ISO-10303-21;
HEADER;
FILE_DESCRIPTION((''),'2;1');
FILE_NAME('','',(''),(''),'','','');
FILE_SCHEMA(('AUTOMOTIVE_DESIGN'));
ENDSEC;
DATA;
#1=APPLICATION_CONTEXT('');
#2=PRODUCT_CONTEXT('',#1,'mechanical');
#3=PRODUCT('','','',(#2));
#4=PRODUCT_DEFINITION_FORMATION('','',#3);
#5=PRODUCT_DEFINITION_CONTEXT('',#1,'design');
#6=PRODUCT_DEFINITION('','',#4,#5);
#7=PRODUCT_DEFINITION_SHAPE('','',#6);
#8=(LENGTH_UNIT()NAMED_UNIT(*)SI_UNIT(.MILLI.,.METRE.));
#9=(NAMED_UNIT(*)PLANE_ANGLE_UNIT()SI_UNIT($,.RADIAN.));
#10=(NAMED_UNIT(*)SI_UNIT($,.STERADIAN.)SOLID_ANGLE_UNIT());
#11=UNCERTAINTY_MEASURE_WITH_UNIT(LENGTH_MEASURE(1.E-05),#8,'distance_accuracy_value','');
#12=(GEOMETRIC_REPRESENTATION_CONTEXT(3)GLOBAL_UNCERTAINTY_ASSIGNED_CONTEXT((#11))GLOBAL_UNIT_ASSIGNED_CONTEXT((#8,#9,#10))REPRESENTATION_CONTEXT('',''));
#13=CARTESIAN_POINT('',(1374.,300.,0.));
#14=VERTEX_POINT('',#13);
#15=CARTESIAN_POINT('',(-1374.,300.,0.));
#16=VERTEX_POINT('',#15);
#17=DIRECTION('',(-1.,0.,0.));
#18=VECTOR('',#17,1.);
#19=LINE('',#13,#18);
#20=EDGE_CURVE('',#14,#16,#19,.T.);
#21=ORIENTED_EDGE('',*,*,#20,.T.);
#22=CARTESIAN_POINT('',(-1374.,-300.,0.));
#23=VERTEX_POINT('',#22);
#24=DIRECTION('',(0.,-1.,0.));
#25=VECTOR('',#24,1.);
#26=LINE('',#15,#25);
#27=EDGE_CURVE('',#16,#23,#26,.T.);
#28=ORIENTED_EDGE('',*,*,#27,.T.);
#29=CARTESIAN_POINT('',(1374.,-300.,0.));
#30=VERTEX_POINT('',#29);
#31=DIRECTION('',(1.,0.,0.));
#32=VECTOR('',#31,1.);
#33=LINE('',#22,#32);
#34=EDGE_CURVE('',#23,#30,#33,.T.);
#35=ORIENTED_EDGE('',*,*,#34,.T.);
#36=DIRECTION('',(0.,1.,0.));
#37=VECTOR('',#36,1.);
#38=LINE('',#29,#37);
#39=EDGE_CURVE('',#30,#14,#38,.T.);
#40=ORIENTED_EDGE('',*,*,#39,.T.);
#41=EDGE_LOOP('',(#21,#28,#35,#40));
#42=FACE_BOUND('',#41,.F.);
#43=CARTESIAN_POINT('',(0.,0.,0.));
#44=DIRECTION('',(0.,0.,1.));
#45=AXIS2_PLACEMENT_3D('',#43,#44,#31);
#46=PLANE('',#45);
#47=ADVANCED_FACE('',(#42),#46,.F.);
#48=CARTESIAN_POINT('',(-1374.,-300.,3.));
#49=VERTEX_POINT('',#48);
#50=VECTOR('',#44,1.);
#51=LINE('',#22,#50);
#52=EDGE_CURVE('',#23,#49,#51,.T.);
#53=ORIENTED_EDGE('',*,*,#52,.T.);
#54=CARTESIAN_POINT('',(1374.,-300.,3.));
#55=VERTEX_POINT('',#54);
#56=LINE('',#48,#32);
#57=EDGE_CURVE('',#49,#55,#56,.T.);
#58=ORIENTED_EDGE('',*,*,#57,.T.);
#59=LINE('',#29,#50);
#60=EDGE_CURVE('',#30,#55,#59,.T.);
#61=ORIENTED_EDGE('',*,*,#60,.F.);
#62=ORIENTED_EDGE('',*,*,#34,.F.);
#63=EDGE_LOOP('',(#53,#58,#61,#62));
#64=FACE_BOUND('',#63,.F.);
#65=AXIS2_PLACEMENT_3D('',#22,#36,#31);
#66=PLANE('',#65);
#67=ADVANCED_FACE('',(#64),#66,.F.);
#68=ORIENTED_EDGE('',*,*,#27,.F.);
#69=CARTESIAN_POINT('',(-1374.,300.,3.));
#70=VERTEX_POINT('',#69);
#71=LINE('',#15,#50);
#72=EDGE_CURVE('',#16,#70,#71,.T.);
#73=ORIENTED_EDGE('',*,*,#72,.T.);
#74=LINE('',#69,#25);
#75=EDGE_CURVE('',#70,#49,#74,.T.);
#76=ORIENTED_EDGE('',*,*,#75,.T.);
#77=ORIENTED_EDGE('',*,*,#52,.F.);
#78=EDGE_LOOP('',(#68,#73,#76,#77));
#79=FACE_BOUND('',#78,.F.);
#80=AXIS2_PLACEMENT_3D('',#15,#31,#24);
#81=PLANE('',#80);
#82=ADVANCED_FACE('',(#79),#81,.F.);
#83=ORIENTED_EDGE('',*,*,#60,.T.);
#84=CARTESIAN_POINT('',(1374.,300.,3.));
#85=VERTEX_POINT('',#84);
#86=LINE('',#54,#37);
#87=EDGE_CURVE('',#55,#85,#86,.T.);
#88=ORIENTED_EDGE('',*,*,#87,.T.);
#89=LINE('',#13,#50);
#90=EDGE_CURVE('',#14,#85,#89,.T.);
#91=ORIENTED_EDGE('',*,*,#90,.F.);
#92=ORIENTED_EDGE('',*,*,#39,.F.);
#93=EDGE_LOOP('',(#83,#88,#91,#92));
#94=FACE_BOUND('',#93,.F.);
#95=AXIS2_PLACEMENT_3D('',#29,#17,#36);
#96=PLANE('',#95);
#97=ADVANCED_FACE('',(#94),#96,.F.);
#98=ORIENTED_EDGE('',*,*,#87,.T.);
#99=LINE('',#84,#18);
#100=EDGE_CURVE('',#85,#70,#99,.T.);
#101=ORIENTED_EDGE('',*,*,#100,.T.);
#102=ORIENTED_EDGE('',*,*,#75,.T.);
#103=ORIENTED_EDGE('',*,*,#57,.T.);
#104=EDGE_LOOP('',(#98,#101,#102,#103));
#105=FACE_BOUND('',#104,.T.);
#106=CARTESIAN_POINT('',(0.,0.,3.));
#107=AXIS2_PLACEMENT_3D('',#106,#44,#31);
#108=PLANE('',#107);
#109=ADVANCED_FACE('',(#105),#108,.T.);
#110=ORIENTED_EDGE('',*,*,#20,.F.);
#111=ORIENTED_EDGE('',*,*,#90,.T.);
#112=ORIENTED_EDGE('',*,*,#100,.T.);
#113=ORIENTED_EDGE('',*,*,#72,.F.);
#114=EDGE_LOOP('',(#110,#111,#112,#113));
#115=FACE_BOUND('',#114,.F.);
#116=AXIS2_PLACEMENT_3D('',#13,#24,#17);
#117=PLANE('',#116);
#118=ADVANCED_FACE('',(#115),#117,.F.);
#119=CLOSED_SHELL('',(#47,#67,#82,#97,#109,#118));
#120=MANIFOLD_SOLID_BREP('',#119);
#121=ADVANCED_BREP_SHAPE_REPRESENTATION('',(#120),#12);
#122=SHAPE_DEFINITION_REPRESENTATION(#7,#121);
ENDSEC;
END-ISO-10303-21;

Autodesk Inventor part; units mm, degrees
ref_plane "YZ Plane" through (0, 0, 0) normal (1, 0, 0) x (0, 1, 0)
ref_plane "XZ Plane" through (0, 0, 0) normal (0, 1, 0) x (-1, 0, 0)
ref_plane "XY Plane" through (0, 0, 0) normal (0, 0, 1) x (1, 0, 0)
sketch "Sketch1" plane through (0, 0, 0) normal (0, 0, 1) x (1, 0, 0)
  line L0 (-1374, -300) -> (1374, -300)
  line L1 (1374, -300) -> (1374, 300)
  line L2 (1374, 300) -> (-1374, 300)
  line L3 (-1374, 300) -> (-1374, -300)
  line L4 (-1374, -300) -> (1374, 300) construction
  line L5 (1374, -300) -> (-1374, 300) construction
  point P0 (0, 0)
  dimension "d0" = 2748
  dimension "d1" = 600
extrude "Plate1" add sketch "Sketch1" along normal blind 3
sketch "Sketch5" plane through (0, 0, 3) normal (0, 0, 1) x (1, 0, 0)
  line L0 (1349, 275) -> (1349, 75) construction
  line L1 (1349, 75) -> (1334, 75) construction
  line L2 (1334, 75) -> (1334, 275) construction
  line L3 (1334, 275) -> (1349, 275) construction
  line L4 (-1374, -300) -> (-1374, 300) projected
  line L5 (1374, -300) -> (-1374, -300) projected
  line L6 (-1374, 300) -> (1374, 300) projected
  line L7 (1374, 300) -> (1374, -300) projected
  point P0 (0, 0)
  dimension "d28" = 200
  dimension "d29" = 15
  dimension "d30" = 25
  dimension "d31" = 25
mark "Mark1"
equation "\"d2\" = Thickness"
equation "\"BendReliefWidth\" = Thickness"
equation "\"BendReliefDepth\" = 0.5 * Thickness"
equation "\"CornerReliefSize\" = 4 * Thickness"
equation "\"MinimumRemnant\" = 2 * Thickness"
equation "\"TransitionRadius\" = BendRadius"
equation "\"JacobiRadiusSize\" = BendRadius"
equation "\"GapSize\" = Thickness"
equation "\"Thickness\" = 3"
equation "\"BendRadius\" = 5"
properties part number "BSH 047 board" material "09g2s"
